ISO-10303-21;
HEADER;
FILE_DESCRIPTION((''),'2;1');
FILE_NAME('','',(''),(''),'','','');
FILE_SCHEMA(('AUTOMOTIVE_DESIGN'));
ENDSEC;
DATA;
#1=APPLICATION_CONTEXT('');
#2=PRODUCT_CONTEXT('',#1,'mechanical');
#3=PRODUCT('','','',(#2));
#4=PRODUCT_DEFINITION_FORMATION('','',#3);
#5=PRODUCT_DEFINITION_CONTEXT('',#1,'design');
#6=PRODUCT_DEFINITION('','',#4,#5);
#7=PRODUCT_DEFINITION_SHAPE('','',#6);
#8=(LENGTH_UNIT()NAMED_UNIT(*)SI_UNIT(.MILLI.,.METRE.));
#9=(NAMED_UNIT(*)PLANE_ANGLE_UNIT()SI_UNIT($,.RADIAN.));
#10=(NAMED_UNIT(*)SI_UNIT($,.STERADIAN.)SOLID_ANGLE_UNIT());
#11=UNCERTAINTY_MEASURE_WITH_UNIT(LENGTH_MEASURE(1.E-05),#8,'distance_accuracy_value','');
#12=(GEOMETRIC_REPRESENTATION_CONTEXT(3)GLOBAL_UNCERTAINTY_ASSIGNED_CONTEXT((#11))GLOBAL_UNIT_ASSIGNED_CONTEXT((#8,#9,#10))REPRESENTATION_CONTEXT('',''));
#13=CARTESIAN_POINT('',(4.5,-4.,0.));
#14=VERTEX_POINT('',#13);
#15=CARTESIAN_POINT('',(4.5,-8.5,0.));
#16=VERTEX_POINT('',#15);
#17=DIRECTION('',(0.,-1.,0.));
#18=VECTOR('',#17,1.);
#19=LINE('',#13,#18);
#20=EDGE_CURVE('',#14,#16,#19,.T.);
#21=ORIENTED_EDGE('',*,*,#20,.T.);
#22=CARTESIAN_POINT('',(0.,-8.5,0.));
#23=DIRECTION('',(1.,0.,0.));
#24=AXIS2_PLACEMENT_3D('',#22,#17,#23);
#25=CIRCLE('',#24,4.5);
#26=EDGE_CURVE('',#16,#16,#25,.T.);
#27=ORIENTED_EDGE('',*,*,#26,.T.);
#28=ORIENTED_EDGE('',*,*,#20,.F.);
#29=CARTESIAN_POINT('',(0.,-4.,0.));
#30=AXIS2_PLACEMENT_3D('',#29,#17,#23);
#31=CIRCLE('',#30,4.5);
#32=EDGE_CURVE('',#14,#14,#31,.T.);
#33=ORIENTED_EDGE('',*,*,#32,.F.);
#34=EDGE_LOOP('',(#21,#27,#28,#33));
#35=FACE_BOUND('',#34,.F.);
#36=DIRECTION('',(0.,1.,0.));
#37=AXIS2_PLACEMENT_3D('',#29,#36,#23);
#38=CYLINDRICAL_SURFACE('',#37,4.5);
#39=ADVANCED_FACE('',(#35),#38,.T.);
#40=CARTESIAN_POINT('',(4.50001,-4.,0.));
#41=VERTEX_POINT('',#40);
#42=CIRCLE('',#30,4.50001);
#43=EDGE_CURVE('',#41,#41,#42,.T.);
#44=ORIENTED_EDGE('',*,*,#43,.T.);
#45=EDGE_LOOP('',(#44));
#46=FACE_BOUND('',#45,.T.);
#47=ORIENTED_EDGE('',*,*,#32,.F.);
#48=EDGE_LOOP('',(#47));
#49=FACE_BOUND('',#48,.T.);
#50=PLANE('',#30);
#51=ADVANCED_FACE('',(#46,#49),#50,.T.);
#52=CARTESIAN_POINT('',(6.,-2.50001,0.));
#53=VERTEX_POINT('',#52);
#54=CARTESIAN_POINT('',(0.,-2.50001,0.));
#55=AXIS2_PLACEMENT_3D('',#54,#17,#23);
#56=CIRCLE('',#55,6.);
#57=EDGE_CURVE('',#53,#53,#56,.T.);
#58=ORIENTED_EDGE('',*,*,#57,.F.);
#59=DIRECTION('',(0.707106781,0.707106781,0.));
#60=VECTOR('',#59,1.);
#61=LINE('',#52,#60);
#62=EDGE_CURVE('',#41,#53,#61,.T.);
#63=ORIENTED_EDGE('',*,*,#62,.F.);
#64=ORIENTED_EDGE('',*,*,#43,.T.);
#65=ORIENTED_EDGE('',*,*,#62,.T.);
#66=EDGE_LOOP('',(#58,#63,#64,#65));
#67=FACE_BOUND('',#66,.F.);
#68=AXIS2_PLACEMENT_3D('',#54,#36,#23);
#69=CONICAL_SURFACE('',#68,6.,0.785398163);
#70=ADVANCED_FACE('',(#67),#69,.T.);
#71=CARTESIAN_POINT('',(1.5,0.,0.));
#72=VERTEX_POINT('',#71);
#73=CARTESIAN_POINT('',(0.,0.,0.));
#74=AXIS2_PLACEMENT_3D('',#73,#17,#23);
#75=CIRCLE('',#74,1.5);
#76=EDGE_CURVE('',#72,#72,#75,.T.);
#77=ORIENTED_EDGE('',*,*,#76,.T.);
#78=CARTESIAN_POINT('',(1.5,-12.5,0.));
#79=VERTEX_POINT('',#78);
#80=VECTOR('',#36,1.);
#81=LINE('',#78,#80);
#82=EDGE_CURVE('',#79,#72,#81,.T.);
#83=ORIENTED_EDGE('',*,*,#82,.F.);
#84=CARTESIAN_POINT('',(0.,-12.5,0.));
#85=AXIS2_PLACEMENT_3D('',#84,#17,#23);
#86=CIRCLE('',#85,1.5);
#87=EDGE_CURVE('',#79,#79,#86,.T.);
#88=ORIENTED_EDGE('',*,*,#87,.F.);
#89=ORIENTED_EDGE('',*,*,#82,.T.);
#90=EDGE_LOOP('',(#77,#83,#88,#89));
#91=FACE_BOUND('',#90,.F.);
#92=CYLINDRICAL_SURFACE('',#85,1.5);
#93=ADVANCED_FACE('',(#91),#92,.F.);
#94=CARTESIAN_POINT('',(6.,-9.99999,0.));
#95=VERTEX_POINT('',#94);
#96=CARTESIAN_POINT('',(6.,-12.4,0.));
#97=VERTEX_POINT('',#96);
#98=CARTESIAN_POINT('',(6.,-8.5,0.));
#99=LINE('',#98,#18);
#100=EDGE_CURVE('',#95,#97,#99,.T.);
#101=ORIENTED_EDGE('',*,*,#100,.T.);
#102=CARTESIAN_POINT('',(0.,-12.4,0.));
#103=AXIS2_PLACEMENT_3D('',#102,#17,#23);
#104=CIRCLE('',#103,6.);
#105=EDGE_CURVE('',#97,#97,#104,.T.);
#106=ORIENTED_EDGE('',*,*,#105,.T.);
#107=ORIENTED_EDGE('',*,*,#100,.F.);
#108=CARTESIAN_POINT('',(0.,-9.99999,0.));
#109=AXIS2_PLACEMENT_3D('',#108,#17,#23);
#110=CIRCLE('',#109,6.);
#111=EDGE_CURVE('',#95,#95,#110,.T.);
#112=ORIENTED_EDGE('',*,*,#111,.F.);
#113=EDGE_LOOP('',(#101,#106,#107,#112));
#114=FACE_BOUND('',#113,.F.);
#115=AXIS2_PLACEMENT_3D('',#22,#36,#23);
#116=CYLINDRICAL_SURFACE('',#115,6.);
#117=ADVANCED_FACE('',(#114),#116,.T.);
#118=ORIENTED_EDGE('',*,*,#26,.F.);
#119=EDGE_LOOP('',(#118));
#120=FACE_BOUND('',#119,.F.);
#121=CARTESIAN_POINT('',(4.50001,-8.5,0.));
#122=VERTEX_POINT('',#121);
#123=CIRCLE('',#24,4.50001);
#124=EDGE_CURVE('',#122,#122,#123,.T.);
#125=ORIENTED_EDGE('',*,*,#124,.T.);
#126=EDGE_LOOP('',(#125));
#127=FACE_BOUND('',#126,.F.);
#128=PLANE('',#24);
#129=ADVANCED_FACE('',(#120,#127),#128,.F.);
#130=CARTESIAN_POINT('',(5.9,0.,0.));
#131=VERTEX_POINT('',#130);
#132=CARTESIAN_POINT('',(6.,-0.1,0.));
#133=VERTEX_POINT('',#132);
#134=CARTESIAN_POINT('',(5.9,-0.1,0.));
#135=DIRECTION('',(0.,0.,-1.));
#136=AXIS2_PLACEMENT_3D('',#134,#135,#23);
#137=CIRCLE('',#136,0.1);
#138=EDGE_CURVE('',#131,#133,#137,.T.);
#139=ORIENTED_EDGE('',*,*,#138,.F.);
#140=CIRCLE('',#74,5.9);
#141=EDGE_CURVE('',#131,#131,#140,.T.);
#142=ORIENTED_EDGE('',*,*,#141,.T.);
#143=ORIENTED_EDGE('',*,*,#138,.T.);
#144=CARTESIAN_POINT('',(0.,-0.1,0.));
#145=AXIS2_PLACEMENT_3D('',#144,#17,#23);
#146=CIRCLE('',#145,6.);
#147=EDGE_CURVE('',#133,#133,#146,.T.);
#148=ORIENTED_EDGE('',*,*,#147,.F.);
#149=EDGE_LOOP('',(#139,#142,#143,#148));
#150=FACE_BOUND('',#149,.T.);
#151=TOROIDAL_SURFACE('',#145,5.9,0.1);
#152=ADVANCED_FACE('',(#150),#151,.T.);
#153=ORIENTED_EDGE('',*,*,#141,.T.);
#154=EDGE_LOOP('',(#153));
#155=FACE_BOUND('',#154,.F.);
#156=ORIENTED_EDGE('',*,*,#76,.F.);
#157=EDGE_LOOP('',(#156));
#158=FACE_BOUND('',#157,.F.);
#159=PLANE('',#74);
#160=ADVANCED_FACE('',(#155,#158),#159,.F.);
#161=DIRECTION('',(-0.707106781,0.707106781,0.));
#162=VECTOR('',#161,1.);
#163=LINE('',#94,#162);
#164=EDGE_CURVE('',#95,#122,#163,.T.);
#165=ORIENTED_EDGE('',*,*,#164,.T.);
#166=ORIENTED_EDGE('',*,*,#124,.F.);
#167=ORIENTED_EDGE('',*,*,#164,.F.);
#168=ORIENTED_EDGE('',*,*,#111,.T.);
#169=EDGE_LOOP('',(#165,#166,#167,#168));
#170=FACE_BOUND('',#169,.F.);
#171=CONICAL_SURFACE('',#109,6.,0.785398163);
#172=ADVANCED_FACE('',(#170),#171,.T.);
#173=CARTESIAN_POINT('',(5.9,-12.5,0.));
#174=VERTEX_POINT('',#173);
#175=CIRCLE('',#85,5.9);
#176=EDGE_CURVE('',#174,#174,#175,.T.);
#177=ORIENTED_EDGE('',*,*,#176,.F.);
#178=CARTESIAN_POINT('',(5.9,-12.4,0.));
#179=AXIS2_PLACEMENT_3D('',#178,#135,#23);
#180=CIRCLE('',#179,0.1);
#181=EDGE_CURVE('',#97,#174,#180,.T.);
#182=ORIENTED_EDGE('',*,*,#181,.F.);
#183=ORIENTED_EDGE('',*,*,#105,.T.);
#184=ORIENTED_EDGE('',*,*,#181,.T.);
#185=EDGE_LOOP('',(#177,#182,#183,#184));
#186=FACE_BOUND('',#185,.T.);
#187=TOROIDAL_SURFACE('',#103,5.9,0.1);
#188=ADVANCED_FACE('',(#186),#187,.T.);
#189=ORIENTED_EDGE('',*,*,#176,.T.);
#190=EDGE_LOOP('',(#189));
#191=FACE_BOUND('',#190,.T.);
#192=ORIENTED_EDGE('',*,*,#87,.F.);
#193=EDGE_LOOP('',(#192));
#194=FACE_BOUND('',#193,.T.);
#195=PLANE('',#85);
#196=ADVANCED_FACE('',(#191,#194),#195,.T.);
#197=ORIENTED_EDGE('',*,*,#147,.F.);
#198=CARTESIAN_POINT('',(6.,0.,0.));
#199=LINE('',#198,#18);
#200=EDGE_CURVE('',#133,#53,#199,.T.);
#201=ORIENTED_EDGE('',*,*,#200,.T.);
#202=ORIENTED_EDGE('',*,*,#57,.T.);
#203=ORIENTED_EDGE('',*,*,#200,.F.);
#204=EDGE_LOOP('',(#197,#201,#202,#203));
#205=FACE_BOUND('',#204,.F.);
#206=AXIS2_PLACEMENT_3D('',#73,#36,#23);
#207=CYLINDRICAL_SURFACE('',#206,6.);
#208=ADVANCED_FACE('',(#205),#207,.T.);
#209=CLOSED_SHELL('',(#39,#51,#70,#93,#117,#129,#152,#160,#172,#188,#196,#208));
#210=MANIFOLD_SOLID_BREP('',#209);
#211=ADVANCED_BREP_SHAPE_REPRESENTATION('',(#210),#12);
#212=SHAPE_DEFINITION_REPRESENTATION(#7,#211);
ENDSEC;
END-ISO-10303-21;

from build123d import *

# Parameters (mm, degrees)
F0_R     = 6
F1_DEPTH = 4
F2_R     = 4.5
F3_DEPTH = 4.5
F4_R     = 6
F4_R_2   = 4.5
F5_DEPTH = 4
F6_R     = 1.5
F7_DEPTH = 15
F8_SIZE  = 1.49999
F9_R     = 0.1


# Not quite as in the source:
# - a fillet or chamfer is up to 0.001 mm smaller than in the source, because OpenCascade refuses the exact size


with BuildPart() as f1:
    # F0 (on Front) → F1 (new body)
    with BuildSketch(Plane.XZ):
        Circle(F0_R)
    extrude(amount=F1_DEPTH)

    # F2 (on face) → F3 (join)
    with BuildSketch(Plane.XZ.offset(4)):
        Circle(F2_R)
    extrude(amount=F3_DEPTH)

    # F4 (on face) → F5 (join)
    with BuildSketch(Plane.XZ.offset(8.5)):
        Circle(F4_R)
        Circle(F4_R_2, mode=Mode.SUBTRACT)
        Circle(F4_R_2)
    extrude(amount=F5_DEPTH)

    # F6 (on face) → F7 (cut)
    with BuildSketch(Plane.XZ.offset(12.5)):
        Circle(F6_R)
    extrude(amount=-F7_DEPTH, mode=Mode.SUBTRACT)

    # F8 (size 1.5 in the source; OpenCascade refuses exactly that, so slightly less here)
    f8_edges = [f1.edges().sort_by_distance(p)[0] for p in [
        (-6, -8.5, 0),
        (-6, -4, 0),
    ]]
    chamfer(f8_edges, length=F8_SIZE)

    # F9
    f9_edges = [f1.edges().sort_by_distance(p)[0] for p in [
        (-6, -12.5, 0),
        (-6, 0, 0),
    ]]
    fillet(f9_edges, radius=F9_R)


solid = f1.part
